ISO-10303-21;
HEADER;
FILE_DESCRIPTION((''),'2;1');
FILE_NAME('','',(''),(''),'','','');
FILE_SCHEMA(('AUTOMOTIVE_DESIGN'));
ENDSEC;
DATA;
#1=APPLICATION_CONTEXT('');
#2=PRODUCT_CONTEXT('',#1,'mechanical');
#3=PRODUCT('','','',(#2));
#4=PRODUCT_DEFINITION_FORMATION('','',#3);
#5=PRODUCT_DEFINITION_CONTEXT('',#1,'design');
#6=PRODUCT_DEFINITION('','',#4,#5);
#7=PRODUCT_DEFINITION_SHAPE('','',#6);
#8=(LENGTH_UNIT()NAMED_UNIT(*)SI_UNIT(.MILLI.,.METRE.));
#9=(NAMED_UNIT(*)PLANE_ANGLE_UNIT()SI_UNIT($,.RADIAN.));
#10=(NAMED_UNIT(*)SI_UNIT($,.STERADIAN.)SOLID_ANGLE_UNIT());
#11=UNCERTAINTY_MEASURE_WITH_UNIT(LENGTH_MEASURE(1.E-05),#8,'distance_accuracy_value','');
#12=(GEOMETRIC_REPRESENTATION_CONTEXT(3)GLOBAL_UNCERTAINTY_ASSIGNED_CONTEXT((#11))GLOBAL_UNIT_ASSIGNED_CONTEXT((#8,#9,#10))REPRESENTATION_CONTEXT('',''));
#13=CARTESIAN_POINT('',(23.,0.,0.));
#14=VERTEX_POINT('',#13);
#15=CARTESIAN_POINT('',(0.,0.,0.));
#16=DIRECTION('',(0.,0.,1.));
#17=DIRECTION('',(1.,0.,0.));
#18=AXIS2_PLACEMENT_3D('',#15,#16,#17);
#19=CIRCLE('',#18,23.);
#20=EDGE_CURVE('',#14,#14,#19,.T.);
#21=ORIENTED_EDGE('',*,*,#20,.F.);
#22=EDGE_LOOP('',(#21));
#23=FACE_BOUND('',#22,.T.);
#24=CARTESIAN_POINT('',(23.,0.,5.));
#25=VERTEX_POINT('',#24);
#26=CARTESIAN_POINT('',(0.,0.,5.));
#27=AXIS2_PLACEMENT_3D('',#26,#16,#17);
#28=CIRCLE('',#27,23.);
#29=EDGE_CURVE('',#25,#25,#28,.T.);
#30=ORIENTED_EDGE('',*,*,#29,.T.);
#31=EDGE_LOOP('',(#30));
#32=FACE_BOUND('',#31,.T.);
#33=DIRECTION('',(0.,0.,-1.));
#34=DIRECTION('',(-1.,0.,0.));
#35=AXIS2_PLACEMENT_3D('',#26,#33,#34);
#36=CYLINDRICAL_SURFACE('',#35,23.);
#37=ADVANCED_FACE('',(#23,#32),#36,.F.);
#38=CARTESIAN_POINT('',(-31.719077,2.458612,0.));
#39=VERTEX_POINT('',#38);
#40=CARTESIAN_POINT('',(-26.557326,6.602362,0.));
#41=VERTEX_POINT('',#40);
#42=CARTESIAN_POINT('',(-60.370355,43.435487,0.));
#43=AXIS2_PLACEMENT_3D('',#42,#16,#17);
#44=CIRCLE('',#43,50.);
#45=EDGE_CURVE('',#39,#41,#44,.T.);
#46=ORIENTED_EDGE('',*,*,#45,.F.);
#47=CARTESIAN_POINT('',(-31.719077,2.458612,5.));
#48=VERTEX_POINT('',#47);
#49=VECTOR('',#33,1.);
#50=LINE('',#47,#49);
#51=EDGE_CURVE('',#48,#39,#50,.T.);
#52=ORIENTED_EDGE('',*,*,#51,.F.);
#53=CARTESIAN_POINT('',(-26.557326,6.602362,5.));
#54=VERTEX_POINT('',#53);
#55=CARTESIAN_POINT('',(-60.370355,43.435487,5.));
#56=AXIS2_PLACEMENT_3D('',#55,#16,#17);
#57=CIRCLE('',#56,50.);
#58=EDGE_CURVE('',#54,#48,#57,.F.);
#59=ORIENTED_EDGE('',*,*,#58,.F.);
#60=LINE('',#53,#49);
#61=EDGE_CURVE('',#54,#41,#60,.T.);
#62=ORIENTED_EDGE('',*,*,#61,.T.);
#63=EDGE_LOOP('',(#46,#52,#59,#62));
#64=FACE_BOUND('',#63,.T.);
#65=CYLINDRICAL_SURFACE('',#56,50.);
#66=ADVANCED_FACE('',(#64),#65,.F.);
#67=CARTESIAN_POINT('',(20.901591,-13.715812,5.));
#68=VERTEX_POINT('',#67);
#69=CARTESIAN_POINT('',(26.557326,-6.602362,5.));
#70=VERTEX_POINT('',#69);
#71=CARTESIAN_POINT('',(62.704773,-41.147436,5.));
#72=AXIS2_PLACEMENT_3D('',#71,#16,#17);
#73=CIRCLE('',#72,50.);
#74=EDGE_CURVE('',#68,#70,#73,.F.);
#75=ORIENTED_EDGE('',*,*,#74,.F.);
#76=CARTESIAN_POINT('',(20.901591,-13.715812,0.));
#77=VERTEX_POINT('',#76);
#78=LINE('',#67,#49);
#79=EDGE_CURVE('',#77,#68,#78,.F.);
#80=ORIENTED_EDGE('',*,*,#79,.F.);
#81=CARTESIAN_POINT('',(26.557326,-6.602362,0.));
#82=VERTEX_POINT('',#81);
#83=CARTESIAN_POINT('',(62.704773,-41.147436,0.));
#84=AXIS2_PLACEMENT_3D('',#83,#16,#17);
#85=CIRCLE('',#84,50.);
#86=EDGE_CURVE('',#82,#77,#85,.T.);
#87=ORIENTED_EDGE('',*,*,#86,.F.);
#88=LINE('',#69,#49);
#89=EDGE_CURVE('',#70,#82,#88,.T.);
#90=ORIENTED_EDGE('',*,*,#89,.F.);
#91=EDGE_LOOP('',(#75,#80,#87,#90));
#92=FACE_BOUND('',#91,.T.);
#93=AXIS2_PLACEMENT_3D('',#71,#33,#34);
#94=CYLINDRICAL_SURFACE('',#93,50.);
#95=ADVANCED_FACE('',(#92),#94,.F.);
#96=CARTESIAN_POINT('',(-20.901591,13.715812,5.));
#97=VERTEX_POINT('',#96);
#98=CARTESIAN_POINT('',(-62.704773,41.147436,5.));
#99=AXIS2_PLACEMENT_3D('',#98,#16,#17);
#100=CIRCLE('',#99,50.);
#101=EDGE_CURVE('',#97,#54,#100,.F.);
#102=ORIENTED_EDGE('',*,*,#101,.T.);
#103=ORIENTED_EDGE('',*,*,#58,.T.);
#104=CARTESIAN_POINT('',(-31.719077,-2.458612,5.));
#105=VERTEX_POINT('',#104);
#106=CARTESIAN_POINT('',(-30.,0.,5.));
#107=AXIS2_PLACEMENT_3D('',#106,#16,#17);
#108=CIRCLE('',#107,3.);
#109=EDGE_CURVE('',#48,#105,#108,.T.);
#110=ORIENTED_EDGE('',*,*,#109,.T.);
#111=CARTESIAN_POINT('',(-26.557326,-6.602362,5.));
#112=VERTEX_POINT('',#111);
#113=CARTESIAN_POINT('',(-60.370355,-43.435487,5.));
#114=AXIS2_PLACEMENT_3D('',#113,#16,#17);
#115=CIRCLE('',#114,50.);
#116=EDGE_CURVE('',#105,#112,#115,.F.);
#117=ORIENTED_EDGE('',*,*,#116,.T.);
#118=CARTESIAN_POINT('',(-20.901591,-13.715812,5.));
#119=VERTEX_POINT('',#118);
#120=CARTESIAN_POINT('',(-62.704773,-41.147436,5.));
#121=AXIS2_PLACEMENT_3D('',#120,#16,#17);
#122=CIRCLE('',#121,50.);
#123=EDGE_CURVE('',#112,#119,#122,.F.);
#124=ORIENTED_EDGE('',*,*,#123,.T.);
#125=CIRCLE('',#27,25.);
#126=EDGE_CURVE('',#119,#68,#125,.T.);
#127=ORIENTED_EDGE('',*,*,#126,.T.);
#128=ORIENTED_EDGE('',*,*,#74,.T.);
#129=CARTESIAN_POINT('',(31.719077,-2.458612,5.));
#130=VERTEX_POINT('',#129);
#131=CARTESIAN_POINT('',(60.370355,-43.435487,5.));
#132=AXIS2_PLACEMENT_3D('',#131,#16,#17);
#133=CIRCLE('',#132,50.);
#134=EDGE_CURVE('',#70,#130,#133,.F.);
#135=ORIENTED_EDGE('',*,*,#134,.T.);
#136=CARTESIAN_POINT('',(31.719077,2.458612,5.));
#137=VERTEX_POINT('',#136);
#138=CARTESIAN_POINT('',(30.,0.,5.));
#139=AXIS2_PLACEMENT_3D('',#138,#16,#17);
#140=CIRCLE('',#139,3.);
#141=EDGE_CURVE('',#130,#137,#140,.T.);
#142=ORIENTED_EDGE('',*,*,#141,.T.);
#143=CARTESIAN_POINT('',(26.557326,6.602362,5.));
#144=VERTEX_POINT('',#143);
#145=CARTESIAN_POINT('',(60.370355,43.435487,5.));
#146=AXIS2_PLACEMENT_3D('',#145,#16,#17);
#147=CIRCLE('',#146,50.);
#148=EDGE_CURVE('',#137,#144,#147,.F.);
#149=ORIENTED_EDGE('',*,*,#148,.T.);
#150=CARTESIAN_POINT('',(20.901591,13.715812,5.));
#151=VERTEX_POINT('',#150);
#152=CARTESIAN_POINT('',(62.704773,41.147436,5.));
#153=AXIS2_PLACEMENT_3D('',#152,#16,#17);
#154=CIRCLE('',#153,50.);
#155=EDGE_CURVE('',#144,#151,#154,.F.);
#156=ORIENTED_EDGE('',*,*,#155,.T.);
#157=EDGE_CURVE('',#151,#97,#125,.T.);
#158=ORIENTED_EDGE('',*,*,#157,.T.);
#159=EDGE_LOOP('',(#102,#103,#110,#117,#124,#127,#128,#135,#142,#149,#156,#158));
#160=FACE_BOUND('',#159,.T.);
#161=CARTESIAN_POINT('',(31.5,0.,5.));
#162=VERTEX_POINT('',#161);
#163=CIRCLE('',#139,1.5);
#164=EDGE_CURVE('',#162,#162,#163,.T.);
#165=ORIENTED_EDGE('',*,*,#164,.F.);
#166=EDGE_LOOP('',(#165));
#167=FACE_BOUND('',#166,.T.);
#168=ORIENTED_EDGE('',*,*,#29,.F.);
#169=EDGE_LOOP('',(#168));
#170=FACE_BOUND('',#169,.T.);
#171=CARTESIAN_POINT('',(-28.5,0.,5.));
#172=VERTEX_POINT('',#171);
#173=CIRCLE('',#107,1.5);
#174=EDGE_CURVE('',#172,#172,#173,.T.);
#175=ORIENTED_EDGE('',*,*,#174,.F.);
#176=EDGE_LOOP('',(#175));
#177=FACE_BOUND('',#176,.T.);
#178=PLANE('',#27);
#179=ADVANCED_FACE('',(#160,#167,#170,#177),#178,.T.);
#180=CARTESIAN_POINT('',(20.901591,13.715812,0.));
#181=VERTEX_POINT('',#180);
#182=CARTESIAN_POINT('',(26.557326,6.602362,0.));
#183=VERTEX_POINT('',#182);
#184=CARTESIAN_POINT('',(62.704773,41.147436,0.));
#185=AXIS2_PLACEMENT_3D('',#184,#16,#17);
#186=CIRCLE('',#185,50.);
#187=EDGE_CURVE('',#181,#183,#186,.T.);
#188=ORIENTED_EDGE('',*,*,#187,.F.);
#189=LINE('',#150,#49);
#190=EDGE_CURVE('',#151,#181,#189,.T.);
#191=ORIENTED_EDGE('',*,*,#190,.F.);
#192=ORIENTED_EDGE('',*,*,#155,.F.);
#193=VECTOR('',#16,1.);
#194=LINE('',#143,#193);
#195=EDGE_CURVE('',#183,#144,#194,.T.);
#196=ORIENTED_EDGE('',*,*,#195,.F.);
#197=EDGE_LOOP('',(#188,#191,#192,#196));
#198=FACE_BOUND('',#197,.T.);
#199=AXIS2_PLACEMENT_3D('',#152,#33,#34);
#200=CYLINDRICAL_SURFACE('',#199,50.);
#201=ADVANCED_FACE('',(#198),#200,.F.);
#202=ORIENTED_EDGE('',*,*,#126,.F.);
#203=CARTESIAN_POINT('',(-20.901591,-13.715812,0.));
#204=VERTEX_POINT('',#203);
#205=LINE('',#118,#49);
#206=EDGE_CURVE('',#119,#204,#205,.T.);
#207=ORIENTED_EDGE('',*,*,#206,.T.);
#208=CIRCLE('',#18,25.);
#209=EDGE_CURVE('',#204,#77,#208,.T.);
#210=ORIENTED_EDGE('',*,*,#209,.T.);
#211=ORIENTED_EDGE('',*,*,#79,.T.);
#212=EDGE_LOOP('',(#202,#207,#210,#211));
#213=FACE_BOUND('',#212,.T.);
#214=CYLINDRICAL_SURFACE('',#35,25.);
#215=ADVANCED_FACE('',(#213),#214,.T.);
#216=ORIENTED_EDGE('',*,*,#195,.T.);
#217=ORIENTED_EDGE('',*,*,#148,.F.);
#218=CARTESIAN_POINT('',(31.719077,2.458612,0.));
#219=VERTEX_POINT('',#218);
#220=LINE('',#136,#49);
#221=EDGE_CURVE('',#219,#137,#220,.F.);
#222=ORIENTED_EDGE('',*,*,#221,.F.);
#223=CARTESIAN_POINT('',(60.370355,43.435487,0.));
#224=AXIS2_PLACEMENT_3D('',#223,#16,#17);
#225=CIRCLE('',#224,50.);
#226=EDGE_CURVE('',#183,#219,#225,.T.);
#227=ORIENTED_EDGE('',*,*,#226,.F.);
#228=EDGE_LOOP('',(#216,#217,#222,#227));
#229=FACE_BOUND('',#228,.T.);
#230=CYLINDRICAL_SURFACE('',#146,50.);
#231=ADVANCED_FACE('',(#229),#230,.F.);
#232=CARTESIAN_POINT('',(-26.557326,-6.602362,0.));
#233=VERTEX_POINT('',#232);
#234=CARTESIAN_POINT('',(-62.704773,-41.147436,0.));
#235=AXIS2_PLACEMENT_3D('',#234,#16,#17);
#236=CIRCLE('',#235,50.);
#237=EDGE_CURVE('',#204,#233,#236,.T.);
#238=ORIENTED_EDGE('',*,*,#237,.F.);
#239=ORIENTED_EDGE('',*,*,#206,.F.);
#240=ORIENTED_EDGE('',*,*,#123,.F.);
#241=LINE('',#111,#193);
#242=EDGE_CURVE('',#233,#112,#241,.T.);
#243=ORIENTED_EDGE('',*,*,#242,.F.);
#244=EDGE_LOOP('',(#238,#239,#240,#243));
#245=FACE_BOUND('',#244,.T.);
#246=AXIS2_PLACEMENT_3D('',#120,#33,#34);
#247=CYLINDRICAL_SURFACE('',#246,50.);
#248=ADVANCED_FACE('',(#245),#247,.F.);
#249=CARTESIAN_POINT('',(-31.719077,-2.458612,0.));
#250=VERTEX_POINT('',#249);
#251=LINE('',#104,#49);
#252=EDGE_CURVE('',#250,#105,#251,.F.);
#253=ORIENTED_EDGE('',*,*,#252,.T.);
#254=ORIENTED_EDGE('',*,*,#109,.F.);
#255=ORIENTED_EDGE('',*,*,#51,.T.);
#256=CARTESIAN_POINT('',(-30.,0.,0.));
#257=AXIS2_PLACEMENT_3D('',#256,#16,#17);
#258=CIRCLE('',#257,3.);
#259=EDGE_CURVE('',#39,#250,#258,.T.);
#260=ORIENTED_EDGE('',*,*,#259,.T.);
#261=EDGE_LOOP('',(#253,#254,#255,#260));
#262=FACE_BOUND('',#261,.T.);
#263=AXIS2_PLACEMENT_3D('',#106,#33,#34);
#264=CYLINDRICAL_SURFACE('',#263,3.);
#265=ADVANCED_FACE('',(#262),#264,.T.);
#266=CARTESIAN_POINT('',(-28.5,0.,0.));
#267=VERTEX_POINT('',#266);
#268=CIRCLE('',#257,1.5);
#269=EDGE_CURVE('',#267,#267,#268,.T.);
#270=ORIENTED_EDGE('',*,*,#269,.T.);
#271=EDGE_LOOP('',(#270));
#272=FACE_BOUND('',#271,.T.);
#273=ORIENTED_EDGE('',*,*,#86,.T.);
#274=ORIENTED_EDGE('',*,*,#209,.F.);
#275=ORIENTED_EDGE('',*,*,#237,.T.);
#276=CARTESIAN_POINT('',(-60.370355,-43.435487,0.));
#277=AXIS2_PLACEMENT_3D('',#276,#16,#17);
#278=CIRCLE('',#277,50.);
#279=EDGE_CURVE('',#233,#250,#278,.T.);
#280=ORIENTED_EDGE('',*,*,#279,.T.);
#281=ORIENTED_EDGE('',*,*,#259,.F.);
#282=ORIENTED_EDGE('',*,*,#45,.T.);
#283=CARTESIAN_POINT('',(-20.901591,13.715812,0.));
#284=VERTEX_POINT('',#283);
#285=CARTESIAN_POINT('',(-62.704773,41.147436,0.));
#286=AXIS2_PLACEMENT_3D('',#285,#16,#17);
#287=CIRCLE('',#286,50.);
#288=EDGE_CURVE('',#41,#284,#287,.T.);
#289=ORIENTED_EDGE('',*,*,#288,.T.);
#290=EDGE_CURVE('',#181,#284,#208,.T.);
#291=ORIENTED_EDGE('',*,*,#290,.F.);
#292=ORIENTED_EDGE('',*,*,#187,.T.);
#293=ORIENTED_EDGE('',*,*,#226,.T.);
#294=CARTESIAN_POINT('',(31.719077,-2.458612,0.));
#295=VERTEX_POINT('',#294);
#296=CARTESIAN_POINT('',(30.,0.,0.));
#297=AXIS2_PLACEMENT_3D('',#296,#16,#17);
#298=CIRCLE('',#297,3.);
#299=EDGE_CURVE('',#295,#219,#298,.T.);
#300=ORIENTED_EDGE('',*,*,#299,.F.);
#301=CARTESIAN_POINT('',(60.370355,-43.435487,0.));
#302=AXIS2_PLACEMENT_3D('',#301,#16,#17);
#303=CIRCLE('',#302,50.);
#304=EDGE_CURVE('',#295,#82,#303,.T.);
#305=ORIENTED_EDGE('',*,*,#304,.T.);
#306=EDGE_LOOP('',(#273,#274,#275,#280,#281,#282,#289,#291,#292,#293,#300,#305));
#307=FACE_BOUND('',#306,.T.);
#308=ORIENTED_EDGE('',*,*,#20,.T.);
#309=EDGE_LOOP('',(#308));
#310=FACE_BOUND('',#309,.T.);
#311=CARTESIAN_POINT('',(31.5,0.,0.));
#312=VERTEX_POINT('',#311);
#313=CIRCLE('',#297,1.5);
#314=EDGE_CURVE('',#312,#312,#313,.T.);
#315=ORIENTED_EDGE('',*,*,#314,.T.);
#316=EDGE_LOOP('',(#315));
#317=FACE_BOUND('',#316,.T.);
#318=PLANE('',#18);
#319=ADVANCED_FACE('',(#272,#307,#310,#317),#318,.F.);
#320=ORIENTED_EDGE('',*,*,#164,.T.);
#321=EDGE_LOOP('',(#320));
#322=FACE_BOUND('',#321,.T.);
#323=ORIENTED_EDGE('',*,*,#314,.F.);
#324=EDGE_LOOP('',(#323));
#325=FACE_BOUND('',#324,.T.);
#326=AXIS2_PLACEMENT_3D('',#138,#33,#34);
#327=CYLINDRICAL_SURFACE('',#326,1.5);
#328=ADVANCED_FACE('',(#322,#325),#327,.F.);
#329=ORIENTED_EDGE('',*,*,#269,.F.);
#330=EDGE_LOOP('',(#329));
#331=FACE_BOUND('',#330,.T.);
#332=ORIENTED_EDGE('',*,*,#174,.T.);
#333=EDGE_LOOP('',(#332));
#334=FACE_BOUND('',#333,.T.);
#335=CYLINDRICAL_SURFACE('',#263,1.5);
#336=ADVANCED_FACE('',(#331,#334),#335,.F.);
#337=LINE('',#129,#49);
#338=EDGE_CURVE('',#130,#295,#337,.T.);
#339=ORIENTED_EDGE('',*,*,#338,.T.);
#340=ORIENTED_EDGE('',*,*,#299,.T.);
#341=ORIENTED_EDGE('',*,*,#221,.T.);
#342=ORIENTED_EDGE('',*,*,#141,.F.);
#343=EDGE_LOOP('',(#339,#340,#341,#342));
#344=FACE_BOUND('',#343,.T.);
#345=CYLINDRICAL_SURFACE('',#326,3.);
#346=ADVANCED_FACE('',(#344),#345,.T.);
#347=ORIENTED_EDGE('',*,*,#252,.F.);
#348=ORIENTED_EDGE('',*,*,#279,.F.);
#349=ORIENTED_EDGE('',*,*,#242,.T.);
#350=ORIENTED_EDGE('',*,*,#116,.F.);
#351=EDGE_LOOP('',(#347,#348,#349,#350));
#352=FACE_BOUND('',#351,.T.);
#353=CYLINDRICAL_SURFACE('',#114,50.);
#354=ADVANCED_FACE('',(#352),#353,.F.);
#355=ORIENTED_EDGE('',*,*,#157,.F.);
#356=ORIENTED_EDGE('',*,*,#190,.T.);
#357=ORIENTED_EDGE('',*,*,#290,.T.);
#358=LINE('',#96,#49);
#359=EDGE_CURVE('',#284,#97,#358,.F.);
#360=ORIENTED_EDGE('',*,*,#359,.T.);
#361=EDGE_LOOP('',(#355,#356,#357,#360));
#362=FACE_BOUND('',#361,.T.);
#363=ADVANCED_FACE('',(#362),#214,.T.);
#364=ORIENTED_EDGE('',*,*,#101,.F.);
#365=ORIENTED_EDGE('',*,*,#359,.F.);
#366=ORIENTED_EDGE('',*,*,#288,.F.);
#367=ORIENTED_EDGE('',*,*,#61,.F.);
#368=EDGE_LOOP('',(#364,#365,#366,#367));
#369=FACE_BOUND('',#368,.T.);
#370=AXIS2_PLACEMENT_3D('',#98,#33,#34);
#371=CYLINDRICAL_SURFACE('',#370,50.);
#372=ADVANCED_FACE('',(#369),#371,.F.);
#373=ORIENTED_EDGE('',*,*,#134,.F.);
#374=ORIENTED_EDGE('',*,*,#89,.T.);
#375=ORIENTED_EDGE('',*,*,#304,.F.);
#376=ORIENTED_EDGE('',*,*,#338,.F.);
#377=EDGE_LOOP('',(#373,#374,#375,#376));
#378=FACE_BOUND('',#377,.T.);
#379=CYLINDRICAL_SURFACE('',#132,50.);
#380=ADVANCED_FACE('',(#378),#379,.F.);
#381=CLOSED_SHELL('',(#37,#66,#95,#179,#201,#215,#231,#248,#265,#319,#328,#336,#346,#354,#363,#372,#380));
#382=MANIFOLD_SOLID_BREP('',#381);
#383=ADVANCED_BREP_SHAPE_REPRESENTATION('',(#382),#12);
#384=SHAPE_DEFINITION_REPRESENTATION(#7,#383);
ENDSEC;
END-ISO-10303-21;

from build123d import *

# Parameters (mm, degrees)
ESQUISSE1_R        = 25
ESQUISSE1_R_2      = 23
ESQUISSE1_R_3      = 3
ESQUISSE1_R_4      = 1.5
BOSS_EXTRU_1_DEPTH = 5
CONG_1_R           = 50
CONG_2_R           = 50


with BuildPart() as part:
    # Esquisse1 → Boss.-Extru.1 (new body)
    # profile 1 of 5: a face of its own
    with BuildSketch(Plane.XY):
        Circle(ESQUISSE1_R)
        Circle(ESQUISSE1_R_2, mode=Mode.SUBTRACT)
    # profile 2 of 5: a face of its own
    with BuildSketch(Plane.XY):
        with BuildLine():
            Line((30, 3), (22.547920633, 10.797743982))
            ThreePointArc((22.547920633, 10.797743982), (24.379274147, 5.536333812), (25, 0))
            ThreePointArc((25, 0), (24.379274147, -5.536333812), (22.547920633, -10.797743982))
            Line((22.547920633, -10.797743982), (30, -3))
            ThreePointArc((30, -3), (27, 0), (30, 3))
        make_face()
    # profile 3 of 5: a face of its own
    with BuildSketch(Plane.XY):
        with Locations((30, 0)):
            Circle(ESQUISSE1_R_3)
        with Locations((30, 0)):
            Circle(ESQUISSE1_R_4, mode=Mode.SUBTRACT)
    # profile 4 of 5: a face of its own
    with BuildSketch(Plane.XY):
        with Locations((-30, 0)):
            Circle(ESQUISSE1_R_3)
        with Locations((-30, 0)):
            Circle(ESQUISSE1_R_4, mode=Mode.SUBTRACT)
    # profile 5 of 5: a face of its own
    with BuildSketch(Plane.XY):
        with BuildLine():
            Line((-22.547920633, 10.797743982), (-30, 3))
            ThreePointArc((-30, 3), (-27.878679656, 2.121320344), (-27, 0))
            ThreePointArc((-27, 0), (-27.878679656, -2.121320344), (-30, -3))
            Line((-30, -3), (-22.547920633, -10.797743982))
            ThreePointArc((-22.547920633, -10.797743982), (-25, 0), (-22.547920633, 10.797743982))
        make_face()
    extrude(amount=BOSS_EXTRU_1_DEPTH)

    # Congé1
    cong_1_edges = [part.edges().sort_by_distance(p)[0] for p in [
        (22.547920633, -10.797743982, 2.5),
        (-22.547920633, -10.797743982, 2.5),
        (-22.547920633, 10.797743982, 2.5),
        (22.547920633, 10.797743982, 2.5),
    ]]
    fillet(cong_1_edges, radius=CONG_1_R)

    # Congé2
    # the kernel refuses this fillet: 50 mm, written as the material it adds along each edge
    with BuildSketch(Plane(origin=(-30, 3, 0), x_dir=(0.690901472787751, 0.722948929662197, 0), z_dir=(0, 0, 1))) as cong_2_piece_1:
        with BuildLine():
            CenterArc((8.249869656, 49.8931531), CONG_2_R, 258.662988377, 7.590639101)
            Line((-1.579108122, 0.868759215), (-1.775687678, -0.111728663))
            ThreePointArc((-1.775687678, -0.111728663), (-1.20479652, -0.320389641), (-0.72294893, -0.690901473))
            Line((-0.72294893, -0.690901473), (0, -1))
            ThreePointArc((0, -1), (2.491435997, -1), (4.917532041, -0.997863062))
            Line((4.917532041, -0.997863062), (4.982871995, 0))
        make_face()
    extrude(amount=5)
    with BuildSketch(Plane(origin=(-30, -3, 0), x_dir=(-0.9538179852697427, 0.30038517103207485, 0), z_dir=(0, 0, 1))) as cong_2_piece_2:
        with BuildLine():
            CenterArc((16.821569578, 47.690899263), CONG_2_R, 244.928622049, 7.590639101)
            Line((-4.365780115, 2.401869543), (-4.789527109, 1.496088949))
            ThreePointArc((-4.789527109, 1.496088949), (-2.664915192, 0.324777383), (-0.482025134, -0.876157389))
            Line((-0.482025134, -0.876157389), (0.300385171, -0.953817985))
            ThreePointArc((0.300385171, -0.953817985), (0.901155513, -0.861453956), (1.501925855, -0.953817985))
            Line((1.501925855, -0.953817985), (1.802311026, 0))
        make_face()
    extrude(amount=5)
    with BuildSketch(Plane(origin=(30, -3, 0), x_dir=(0.9538179852697404, 0.30038517103208245, 0), z_dir=(0, 0, 1))) as cong_2_piece_3:
        with BuildLine():
            CenterArc((16.821569578, -47.690899263), CONG_2_R, 107.48073885, 7.590639101)
            Line((-4.365780115, -2.401869543), (-4.789527109, -1.496088949))
            ThreePointArc((-4.789527109, -1.496088949), (-2.664915192, -0.324777383), (-0.482025134, 0.876157389))
            Line((-0.482025134, 0.876157389), (0.300385171, 0.953817985))
            ThreePointArc((0.300385171, 0.953817985), (0.901155513, 0.861453956), (1.501925855, 0.953817985))
            Line((1.501925855, 0.953817985), (1.802311026, 0))
        make_face()
    extrude(amount=5)
    with BuildSketch(Plane(origin=(30, 3, 0), x_dir=(-0.6909014727877525, 0.7229489296621958, 0), z_dir=(0, 0, 1))) as cong_2_piece_4:
        with BuildLine():
            CenterArc((8.249869656, -49.8931531), CONG_2_R, 93.746372522, 7.590639101)
            Line((-1.579108122, -0.868759215), (-1.775687678, 0.111728663))
            ThreePointArc((-1.775687678, 0.111728663), (-1.20479652, 0.320389641), (-0.72294893, 0.690901473))
            Line((-0.72294893, 0.690901473), (0, 1))
            ThreePointArc((0, 1), (2.491435997, 1), (4.917532041, 0.997863062))
            Line((4.917532041, 0.997863062), (4.982871995, 0))
        make_face()
    extrude(amount=5)


solid = part.part
